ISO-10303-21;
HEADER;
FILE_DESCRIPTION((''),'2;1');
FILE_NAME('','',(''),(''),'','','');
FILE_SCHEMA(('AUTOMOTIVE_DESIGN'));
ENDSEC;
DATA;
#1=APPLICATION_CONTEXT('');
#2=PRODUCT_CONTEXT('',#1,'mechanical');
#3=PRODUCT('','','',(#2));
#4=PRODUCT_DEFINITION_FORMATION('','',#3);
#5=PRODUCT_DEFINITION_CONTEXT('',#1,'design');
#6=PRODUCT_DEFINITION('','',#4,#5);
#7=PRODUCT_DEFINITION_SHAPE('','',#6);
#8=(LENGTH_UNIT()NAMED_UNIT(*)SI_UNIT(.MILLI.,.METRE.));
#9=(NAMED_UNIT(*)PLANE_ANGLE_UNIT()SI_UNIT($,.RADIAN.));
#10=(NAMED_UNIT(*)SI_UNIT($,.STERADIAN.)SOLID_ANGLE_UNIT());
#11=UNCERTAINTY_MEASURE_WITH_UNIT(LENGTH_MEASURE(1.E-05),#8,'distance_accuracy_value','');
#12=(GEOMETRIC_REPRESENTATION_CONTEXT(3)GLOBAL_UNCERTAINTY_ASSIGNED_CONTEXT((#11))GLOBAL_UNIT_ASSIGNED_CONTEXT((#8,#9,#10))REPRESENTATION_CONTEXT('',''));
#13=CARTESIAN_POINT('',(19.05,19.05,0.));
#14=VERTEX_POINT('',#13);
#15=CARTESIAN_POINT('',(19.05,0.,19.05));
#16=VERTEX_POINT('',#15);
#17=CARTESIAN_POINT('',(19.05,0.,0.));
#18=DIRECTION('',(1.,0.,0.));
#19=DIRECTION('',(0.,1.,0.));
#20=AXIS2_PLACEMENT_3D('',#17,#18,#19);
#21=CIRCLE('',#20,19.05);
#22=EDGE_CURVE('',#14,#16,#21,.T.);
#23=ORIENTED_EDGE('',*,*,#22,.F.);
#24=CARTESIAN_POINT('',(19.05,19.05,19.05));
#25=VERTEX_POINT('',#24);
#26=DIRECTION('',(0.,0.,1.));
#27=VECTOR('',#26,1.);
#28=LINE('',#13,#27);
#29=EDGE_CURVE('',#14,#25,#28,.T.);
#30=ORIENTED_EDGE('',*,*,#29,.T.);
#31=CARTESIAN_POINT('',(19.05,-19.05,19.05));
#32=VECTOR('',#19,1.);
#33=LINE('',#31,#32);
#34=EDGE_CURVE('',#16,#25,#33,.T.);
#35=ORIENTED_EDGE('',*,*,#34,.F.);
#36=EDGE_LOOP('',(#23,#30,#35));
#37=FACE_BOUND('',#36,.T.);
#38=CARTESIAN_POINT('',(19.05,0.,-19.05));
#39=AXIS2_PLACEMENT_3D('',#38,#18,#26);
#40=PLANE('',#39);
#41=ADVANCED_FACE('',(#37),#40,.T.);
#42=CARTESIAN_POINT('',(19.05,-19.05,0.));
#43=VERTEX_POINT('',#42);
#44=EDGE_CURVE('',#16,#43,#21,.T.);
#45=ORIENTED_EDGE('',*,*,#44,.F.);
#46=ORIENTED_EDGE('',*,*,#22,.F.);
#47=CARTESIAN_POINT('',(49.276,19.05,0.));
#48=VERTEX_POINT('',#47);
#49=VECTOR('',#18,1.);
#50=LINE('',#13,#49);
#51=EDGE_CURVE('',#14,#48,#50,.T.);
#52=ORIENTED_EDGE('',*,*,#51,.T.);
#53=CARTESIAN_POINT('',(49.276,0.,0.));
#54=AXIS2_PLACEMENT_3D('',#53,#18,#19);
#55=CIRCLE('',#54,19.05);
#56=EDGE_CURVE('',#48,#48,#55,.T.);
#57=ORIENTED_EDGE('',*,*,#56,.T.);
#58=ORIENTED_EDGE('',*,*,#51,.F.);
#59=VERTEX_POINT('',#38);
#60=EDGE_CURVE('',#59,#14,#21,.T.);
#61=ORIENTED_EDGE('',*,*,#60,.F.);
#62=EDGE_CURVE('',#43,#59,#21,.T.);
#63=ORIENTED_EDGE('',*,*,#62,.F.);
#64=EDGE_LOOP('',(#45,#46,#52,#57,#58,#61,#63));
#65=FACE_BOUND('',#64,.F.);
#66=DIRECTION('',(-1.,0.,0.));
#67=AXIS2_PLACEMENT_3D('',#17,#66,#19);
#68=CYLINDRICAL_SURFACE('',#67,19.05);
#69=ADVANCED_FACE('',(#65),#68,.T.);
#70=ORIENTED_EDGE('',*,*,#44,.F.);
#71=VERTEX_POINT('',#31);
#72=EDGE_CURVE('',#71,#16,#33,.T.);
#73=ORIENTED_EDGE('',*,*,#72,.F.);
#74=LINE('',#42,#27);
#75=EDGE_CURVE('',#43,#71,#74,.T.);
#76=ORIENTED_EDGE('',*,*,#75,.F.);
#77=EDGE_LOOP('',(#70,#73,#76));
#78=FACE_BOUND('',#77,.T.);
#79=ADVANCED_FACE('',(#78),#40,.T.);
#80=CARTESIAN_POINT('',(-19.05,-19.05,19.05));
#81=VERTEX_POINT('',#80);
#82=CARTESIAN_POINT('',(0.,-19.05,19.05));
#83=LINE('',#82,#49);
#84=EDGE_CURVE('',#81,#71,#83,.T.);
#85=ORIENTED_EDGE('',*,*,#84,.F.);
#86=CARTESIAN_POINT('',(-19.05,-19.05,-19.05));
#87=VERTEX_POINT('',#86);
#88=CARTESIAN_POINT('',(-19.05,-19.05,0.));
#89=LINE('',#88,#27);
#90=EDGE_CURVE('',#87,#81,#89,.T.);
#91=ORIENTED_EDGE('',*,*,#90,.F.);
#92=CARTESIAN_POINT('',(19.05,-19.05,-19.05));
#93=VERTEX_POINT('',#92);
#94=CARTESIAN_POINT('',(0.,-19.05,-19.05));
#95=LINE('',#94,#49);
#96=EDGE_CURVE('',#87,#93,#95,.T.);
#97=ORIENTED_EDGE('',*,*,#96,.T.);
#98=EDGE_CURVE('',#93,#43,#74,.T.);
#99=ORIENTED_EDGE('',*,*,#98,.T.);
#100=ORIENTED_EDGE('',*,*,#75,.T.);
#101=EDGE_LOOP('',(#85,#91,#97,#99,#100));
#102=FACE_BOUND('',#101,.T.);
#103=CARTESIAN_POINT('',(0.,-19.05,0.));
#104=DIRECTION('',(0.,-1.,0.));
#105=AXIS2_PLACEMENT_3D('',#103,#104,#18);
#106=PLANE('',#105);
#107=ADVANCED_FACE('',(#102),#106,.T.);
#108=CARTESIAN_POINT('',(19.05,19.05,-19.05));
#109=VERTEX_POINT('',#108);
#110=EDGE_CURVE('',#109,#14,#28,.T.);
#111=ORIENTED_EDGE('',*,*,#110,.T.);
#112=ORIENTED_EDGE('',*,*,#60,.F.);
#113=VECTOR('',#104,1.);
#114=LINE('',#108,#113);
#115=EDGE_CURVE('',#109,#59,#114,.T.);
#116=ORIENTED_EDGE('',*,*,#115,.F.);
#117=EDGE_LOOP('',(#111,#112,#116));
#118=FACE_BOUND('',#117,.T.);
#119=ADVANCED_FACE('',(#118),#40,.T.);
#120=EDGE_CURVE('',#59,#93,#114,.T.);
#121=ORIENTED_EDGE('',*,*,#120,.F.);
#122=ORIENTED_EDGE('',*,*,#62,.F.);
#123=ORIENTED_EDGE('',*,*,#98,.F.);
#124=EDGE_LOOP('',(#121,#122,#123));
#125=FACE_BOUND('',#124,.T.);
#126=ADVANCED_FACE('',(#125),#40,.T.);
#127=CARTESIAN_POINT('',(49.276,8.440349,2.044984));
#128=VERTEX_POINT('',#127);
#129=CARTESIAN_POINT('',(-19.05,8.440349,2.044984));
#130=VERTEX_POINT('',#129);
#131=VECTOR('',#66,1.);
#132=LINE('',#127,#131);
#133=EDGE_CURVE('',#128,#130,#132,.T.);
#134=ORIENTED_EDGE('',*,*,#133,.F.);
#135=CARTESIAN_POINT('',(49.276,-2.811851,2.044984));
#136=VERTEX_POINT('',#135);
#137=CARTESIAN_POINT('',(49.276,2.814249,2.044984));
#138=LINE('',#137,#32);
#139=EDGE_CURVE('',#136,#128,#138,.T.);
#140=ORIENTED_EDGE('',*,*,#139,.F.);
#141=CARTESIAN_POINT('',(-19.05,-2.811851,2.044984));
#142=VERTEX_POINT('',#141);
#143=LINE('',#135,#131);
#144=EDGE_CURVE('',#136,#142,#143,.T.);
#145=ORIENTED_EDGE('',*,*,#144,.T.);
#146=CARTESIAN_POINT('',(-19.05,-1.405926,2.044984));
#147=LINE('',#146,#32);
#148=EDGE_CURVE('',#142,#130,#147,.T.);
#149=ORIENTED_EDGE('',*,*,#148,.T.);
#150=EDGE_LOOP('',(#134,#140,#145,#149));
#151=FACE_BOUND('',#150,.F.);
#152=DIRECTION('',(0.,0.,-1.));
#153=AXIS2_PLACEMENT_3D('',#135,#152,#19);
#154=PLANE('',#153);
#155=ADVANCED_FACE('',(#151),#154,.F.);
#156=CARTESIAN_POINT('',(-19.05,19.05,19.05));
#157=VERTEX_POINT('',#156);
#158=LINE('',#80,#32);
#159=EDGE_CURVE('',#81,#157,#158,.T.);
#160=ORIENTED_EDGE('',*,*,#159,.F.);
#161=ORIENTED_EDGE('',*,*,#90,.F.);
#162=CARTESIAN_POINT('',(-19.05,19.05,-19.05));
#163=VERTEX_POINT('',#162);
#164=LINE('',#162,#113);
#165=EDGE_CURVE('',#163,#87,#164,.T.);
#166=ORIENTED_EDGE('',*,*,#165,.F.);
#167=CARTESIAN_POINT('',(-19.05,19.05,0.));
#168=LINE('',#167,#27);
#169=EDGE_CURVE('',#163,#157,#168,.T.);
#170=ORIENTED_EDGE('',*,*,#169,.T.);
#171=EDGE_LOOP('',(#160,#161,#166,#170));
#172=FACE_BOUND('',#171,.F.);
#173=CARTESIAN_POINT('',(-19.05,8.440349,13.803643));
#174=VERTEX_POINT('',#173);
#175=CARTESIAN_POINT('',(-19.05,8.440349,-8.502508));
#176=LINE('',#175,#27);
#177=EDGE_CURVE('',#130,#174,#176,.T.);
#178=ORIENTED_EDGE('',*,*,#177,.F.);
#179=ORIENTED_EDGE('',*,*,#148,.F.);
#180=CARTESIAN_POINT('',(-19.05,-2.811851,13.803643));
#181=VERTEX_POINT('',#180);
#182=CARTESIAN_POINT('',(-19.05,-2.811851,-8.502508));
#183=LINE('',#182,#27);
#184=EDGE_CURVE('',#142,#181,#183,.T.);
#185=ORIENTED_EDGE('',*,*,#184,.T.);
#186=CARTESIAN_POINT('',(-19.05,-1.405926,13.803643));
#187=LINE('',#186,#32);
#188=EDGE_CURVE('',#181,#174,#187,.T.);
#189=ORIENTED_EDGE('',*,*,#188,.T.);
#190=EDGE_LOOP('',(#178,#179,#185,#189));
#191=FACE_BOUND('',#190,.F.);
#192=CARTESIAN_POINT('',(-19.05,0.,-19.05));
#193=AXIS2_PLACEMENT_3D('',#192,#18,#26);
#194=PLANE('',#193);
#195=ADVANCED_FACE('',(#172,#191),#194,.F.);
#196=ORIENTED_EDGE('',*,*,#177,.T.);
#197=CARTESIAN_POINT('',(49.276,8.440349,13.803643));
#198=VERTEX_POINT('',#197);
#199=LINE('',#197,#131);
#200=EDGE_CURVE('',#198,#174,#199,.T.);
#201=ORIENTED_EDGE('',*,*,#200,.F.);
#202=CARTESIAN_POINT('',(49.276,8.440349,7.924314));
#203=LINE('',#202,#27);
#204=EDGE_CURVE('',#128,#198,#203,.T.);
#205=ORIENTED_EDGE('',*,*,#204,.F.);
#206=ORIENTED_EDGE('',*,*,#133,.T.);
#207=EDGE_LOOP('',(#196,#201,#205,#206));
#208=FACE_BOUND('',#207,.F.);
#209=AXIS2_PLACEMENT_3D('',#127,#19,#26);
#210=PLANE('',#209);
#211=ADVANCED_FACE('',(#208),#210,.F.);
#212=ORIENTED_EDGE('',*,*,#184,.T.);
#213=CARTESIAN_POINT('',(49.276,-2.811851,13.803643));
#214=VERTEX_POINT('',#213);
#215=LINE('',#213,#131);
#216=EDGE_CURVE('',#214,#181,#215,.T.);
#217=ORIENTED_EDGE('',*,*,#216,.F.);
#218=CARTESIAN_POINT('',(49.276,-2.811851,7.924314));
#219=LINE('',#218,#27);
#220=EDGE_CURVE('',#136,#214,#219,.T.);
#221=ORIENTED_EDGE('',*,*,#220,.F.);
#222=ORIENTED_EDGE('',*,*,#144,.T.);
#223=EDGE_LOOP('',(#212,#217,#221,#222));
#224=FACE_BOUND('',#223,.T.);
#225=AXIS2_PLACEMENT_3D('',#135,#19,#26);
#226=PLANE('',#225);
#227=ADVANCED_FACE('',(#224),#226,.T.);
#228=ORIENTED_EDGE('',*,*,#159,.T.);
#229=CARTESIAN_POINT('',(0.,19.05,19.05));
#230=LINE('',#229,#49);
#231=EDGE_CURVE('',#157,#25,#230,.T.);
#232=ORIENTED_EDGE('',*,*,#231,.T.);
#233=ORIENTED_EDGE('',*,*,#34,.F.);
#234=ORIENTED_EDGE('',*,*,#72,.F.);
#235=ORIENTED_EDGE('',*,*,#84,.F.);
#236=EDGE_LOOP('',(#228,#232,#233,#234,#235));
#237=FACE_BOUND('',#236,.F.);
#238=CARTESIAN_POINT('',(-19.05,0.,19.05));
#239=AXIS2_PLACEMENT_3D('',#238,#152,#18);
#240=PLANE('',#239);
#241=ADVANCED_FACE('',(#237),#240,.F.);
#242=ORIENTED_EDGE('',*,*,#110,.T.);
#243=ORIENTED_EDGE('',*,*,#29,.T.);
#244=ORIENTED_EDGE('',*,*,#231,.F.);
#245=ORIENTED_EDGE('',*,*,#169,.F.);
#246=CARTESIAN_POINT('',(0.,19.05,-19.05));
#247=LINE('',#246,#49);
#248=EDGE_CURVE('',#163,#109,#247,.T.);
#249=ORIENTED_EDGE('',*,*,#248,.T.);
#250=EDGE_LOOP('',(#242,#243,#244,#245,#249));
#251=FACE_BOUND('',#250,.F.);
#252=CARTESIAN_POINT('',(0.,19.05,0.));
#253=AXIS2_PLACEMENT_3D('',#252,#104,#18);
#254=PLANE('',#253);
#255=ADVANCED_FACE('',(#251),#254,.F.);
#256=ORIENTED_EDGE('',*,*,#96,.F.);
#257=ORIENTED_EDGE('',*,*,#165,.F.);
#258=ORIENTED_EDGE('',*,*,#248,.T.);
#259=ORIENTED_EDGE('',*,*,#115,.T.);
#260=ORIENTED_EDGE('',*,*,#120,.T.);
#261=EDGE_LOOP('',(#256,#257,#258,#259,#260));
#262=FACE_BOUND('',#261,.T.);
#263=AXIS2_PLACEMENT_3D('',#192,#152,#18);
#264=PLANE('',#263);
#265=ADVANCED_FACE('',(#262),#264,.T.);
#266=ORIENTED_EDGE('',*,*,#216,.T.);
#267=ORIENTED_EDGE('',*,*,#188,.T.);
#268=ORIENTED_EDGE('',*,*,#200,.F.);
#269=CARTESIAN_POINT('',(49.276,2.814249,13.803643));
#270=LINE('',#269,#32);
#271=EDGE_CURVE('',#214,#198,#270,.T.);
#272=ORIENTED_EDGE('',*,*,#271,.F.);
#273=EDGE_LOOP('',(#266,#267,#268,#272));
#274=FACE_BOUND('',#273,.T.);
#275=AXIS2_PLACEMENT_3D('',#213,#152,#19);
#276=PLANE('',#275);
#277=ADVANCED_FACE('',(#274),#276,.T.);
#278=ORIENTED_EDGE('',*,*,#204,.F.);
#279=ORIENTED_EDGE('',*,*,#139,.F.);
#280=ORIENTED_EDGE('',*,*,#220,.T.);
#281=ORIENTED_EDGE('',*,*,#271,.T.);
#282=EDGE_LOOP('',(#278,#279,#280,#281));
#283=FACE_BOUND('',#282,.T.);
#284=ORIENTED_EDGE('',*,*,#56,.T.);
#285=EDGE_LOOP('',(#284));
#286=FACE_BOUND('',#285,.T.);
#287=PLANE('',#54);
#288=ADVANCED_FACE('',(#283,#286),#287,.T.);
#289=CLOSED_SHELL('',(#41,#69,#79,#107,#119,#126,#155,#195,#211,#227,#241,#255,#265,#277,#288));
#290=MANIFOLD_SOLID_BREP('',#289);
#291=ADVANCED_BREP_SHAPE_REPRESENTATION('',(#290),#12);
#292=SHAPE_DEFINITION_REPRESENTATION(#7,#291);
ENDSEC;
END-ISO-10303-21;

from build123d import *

# Parameters (mm, degrees)
F1_W     = 38.1
F1_H     = 38.1
F2_DEPTH = 19.05
F3_R     = 19.05
F4_DEPTH = 30.226
F5_W     = 11.2522
F5_H     = 11.7586595006
F6_DEPTH = 68.327


# Not quite as in the source:
# - a variable given as a bare number and used for a length is read in inches; the dataset says mm whatever the document's units were


with BuildPart() as f2:
    # F1 (on Front) → F2 (new body, symmetric)
    with BuildSketch(Plane.XZ):
        Rectangle(F1_W, F1_H)
    extrude(amount=F2_DEPTH, both=True)

    # F3 (on face) → F4 (join)
    with BuildSketch(Plane.YZ.offset(19.05)):
        Circle(F3_R)
    extrude(amount=F4_DEPTH)

    # F5 (on face) → F6 (cut, through all)
    with BuildSketch(Plane.YZ.offset(49.276)):
        with Locations((2.8142485544, 7.924313657)):
            Rectangle(F5_W, F5_H)
    extrude(amount=-F6_DEPTH, mode=Mode.SUBTRACT)


solid = f2.part
